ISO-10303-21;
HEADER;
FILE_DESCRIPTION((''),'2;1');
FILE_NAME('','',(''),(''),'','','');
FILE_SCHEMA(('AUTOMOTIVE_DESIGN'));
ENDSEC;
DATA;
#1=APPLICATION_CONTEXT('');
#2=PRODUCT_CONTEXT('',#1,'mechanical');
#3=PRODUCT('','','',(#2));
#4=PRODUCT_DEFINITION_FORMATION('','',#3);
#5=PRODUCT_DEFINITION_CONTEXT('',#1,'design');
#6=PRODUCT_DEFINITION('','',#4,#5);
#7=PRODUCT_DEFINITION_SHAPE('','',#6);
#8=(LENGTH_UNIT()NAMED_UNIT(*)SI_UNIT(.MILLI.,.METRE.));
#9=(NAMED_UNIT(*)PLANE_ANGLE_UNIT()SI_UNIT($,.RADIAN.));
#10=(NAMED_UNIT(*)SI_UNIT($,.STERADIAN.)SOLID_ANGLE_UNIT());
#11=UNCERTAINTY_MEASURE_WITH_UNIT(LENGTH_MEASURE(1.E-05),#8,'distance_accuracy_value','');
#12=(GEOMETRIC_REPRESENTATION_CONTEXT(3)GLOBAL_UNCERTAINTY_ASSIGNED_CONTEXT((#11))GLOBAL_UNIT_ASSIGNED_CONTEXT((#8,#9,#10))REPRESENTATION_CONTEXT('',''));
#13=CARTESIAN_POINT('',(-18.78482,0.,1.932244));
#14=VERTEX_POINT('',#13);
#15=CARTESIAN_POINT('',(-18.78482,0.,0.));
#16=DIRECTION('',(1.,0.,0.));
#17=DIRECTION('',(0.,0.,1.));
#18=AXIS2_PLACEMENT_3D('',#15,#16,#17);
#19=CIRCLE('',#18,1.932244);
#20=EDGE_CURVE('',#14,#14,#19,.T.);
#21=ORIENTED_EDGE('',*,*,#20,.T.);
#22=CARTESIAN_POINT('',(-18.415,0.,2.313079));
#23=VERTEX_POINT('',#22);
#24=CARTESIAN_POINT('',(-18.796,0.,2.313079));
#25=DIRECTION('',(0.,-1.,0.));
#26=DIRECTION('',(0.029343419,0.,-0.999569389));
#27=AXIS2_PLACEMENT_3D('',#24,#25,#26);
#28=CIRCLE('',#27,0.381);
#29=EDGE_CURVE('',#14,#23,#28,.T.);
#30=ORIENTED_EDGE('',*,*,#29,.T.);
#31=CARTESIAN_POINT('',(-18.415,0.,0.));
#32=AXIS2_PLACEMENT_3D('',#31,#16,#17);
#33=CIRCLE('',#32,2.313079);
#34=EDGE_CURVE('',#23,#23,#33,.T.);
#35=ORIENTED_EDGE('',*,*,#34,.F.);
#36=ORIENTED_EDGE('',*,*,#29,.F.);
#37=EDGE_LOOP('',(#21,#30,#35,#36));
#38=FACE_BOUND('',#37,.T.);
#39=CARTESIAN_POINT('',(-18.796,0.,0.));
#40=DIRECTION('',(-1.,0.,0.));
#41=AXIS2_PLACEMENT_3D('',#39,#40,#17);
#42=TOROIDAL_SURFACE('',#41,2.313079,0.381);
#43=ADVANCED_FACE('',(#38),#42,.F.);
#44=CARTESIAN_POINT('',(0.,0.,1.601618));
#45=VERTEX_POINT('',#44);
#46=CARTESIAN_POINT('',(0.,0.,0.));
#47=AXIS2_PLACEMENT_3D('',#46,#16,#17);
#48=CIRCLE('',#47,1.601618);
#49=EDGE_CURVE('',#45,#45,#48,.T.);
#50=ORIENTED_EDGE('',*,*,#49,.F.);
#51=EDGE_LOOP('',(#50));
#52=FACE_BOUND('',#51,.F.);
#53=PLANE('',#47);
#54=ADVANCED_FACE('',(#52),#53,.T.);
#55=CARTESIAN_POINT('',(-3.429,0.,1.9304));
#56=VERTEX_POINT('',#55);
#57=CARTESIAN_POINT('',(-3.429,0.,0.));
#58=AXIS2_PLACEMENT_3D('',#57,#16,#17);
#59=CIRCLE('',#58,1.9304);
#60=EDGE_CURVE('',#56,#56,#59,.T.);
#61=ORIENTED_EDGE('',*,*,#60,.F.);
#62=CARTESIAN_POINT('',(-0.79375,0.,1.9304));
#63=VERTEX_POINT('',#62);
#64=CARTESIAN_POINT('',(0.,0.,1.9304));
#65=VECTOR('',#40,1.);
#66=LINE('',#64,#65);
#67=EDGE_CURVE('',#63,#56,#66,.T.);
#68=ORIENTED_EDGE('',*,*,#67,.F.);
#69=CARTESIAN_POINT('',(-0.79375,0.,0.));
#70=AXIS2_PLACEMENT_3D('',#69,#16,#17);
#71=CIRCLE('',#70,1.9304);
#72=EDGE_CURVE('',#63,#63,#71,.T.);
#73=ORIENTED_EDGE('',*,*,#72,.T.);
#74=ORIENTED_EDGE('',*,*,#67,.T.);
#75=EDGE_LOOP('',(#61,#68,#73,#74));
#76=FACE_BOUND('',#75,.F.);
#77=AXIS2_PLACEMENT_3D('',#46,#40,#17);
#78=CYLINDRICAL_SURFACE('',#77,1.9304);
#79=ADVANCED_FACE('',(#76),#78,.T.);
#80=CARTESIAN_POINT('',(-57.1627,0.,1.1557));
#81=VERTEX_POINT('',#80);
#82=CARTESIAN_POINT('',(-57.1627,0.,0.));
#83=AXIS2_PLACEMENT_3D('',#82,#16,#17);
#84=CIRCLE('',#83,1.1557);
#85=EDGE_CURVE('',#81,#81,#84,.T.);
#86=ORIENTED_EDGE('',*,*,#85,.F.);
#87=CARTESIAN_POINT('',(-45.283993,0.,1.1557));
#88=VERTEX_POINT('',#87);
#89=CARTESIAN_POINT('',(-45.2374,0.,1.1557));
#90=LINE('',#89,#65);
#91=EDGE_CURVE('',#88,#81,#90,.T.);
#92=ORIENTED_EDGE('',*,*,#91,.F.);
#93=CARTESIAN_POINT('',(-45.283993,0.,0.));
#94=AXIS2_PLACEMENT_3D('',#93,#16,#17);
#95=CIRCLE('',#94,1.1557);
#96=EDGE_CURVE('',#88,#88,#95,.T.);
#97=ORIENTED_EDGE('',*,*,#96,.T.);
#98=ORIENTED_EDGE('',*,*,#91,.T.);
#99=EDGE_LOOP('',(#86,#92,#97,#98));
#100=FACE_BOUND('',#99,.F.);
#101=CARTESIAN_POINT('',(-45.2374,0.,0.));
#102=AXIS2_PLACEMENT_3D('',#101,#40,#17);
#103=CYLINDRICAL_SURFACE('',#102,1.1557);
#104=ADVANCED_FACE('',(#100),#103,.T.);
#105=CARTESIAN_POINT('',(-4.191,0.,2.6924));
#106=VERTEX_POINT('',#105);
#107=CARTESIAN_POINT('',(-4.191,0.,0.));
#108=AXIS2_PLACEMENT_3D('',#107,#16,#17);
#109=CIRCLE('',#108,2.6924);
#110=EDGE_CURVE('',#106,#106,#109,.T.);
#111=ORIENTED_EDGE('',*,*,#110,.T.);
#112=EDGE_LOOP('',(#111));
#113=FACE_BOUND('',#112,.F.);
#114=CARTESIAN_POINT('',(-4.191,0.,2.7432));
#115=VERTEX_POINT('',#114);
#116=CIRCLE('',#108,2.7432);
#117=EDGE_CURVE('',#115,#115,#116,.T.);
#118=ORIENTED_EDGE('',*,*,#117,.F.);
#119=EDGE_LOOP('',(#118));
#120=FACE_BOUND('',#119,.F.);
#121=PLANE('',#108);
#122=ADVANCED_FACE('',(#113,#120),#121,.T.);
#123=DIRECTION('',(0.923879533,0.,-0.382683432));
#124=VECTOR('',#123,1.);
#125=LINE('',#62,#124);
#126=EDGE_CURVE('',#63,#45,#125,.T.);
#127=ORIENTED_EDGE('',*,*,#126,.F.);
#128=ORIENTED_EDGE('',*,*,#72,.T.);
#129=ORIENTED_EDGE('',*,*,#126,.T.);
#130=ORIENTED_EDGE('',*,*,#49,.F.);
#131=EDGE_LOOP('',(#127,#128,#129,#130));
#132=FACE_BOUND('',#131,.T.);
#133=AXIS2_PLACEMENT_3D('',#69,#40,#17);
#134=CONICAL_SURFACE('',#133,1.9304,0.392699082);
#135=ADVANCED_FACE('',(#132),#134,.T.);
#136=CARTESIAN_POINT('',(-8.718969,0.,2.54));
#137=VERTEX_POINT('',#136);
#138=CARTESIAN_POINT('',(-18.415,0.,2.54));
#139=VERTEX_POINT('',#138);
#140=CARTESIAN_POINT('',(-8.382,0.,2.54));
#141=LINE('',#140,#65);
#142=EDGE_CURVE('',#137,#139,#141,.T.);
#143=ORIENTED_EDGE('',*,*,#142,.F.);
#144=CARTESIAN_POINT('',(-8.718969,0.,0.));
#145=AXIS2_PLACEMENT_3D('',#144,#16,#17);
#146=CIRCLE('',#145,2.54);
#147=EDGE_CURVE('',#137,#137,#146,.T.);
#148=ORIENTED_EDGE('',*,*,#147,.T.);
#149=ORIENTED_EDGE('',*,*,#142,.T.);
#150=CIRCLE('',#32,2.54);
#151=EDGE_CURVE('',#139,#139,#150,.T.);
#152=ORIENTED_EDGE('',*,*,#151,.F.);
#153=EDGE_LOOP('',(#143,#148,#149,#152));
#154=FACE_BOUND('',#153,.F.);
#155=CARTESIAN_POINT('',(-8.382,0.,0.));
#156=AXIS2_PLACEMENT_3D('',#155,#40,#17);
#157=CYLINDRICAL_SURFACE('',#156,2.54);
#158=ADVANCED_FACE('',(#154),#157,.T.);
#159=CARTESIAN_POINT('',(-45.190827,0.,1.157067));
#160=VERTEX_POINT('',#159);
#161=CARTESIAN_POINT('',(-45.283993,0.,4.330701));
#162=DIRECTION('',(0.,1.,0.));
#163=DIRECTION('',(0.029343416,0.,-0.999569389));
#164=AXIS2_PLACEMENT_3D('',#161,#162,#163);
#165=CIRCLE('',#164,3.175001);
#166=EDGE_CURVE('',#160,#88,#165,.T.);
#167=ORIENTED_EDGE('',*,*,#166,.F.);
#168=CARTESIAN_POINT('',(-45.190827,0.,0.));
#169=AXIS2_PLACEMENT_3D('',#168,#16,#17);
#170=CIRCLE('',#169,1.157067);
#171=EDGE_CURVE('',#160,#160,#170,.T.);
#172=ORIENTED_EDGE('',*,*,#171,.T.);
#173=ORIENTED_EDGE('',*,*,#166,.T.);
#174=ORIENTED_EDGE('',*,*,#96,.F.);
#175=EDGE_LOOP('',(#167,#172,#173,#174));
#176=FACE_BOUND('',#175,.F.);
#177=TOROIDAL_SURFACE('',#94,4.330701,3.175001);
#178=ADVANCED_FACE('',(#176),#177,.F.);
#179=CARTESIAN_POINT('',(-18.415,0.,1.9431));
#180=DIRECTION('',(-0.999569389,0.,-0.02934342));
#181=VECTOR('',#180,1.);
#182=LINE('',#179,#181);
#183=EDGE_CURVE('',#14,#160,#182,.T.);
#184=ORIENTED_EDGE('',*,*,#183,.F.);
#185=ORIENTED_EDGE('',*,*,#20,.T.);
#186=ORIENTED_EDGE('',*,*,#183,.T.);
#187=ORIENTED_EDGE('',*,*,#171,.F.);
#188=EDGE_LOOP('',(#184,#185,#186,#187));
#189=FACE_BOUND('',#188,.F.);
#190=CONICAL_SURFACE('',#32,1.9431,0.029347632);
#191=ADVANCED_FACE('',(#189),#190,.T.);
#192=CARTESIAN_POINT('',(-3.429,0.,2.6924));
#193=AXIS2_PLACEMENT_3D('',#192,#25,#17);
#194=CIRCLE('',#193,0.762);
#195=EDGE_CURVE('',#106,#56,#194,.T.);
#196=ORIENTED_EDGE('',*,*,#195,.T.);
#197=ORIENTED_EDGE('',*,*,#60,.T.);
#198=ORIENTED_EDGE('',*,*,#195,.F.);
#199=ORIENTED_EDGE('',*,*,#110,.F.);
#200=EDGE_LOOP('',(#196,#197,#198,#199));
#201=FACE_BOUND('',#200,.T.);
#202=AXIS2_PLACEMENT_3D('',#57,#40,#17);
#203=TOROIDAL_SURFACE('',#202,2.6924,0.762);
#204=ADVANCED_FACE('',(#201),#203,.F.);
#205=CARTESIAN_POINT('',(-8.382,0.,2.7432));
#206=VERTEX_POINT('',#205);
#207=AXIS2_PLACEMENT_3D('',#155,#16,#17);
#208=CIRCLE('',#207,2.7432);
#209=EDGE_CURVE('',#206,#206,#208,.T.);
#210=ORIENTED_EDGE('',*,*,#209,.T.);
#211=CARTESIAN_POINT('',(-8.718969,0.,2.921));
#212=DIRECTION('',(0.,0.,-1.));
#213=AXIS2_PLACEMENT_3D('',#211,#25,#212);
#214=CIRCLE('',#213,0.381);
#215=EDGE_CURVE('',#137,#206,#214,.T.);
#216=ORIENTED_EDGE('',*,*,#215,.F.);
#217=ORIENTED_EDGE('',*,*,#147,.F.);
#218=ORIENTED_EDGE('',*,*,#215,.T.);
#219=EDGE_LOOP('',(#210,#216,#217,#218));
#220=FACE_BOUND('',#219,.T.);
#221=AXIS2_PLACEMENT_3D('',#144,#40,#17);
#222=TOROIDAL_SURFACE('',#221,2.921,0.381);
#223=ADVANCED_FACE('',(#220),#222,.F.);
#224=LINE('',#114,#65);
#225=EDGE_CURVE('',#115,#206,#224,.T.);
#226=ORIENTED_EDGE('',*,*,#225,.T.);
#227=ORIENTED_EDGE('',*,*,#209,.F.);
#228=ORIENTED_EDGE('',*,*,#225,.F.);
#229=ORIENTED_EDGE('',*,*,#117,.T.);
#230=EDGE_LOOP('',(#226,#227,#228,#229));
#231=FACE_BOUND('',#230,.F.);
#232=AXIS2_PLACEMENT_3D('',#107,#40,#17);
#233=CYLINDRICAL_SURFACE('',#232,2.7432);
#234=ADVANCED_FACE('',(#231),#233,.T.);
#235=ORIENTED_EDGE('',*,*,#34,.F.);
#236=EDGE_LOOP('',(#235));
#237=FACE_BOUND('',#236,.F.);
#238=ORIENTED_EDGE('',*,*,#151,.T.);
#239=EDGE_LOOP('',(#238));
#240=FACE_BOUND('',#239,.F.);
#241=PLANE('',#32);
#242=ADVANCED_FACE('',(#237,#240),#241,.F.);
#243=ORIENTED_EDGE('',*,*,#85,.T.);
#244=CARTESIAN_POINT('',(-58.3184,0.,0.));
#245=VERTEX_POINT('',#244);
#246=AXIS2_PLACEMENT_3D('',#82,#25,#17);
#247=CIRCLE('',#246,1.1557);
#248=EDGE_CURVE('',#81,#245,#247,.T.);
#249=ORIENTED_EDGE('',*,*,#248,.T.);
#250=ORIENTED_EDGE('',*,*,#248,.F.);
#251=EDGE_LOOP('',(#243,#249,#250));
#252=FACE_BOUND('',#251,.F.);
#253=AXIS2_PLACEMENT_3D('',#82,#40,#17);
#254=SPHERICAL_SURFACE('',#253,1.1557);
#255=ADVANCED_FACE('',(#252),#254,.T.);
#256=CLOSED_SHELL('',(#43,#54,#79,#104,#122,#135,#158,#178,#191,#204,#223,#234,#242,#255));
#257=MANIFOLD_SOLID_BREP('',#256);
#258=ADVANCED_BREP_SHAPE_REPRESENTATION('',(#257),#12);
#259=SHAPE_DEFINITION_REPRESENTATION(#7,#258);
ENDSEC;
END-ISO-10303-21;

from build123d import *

# Parameters (mm, degrees)
F4_R     = 0.762
F5_SIZE2 = 0.3287820151
F5_SIZE  = 0.79375


# Not quite as in the source:
# - a fillet or chamfer that OpenCascade refuses, or shapes differently, is made with other operations: its cross-section is extruded or revolved along the edge and cut away or added


with BuildPart() as f1:
    # F0 (on Front) → F1 (revolve)
    with BuildSketch(Plane.XZ):
        with BuildLine():
            Line((-58.3184, 0), (0, 0))
            Line((0, 0), (0, 1.9304))
            Line((0, 1.9304), (-4.191, 1.9304))
            Line((-4.191, 1.9304), (-4.191, 2.7432))
            Line((-4.191, 2.7432), (-8.382, 2.7432))
            Line((-8.382, 2.7432), (-8.382, 2.54))
            Line((-8.382, 2.54), (-18.415, 2.54))
            Line((-18.415, 2.54), (-18.415, 1.9431))
            Line((-18.415, 1.9431), (-45.2374, 1.1557))
            Line((-45.2374, 1.1557), (-57.1627, 1.1557))
            ThreePointArc((-57.1627, 1.1557), (-57.979903307, 0.817203307), (-58.3184, 0))
        make_face()
    revolve(axis=Axis((-29.1592, 0, 0), (1, 0, 0)))

    # F2: fillet of radius 3.175 on 1 edges, made by hand

    # F2_s1 → F2_t2 (revolve)
    with BuildSketch(Plane.XZ):
        with BuildLine():
            ThreePointArc((-45.1908273531, 1.1570671894), (-45.2374050161, 1.1560418158), (-45.2839927102, 1.1557))
            Line((-45.2839927102, 1.1557), (-45.2374, 1.1557))
            Line((-45.2374, 1.1557), (-45.1908273531, 1.1570671894))
        make_face()
    revolve(axis=Axis((-45.2374, 0, 0), (1, 0, 0)))

    # F3: fillet of radius 0.381 on 2 edges, made by hand

    # F3_s1 → F3_t2 (revolve)
    with BuildSketch(Plane.XZ):
        with BuildLine():
            ThreePointArc((-18.7848201571, 1.9322435371), (-18.5226682235, 2.0476538916), (-18.415, 2.3130794743))
            Line((-18.415, 2.3130794743), (-18.40738, 2.3130794743))
            Line((-18.40738, 2.3130794743), (-18.40738, 1.9357004105))
            Line((-18.40738, 1.9357004105), (-18.7845965603, 1.9246268183))
            Line((-18.7845965603, 1.9246268183), (-18.7848201571, 1.9322435371))
        make_face()
    revolve(axis=Axis((-18.415, 0, 0), (1, 0, 0)))

    # F3_s3 → F3_t4 (revolve)
    with BuildSketch(Plane.XZ):
        with BuildLine():
            ThreePointArc((-8.7189690787, 2.54), (-8.5222215247, 2.5947310925), (-8.382, 2.7432))
            Line((-8.382, 2.7432), (-8.3752606184, 2.739644))
            ThreePointArc((-8.3752606184, 2.739644), (-8.37438, 2.6416), (-8.37438, 2.54))
            Line((-8.37438, 2.54), (-8.382, 2.53238))
            Line((-8.382, 2.53238), (-8.7189690787, 2.53238))
            Line((-8.7189690787, 2.53238), (-8.7189690787, 2.54))
        make_face()
    revolve(axis=Axis((-8.382, 0, 0), (1, 0, 0)))

    # F4
    f4_edges = [f1.edges().sort_by_distance(p)[0] for p in [
        (-4.191, 0, -1.9304),
    ]]
    fillet(f4_edges, radius=F4_R)

    # F5
    f5_edges = [f1.edges().sort_by_distance(p)[0] for p in [
        (0, 0, -1.9304),
    ]]
    chamfer(f5_edges, length=F5_SIZE, length2=F5_SIZE2)


solid = f1.part
